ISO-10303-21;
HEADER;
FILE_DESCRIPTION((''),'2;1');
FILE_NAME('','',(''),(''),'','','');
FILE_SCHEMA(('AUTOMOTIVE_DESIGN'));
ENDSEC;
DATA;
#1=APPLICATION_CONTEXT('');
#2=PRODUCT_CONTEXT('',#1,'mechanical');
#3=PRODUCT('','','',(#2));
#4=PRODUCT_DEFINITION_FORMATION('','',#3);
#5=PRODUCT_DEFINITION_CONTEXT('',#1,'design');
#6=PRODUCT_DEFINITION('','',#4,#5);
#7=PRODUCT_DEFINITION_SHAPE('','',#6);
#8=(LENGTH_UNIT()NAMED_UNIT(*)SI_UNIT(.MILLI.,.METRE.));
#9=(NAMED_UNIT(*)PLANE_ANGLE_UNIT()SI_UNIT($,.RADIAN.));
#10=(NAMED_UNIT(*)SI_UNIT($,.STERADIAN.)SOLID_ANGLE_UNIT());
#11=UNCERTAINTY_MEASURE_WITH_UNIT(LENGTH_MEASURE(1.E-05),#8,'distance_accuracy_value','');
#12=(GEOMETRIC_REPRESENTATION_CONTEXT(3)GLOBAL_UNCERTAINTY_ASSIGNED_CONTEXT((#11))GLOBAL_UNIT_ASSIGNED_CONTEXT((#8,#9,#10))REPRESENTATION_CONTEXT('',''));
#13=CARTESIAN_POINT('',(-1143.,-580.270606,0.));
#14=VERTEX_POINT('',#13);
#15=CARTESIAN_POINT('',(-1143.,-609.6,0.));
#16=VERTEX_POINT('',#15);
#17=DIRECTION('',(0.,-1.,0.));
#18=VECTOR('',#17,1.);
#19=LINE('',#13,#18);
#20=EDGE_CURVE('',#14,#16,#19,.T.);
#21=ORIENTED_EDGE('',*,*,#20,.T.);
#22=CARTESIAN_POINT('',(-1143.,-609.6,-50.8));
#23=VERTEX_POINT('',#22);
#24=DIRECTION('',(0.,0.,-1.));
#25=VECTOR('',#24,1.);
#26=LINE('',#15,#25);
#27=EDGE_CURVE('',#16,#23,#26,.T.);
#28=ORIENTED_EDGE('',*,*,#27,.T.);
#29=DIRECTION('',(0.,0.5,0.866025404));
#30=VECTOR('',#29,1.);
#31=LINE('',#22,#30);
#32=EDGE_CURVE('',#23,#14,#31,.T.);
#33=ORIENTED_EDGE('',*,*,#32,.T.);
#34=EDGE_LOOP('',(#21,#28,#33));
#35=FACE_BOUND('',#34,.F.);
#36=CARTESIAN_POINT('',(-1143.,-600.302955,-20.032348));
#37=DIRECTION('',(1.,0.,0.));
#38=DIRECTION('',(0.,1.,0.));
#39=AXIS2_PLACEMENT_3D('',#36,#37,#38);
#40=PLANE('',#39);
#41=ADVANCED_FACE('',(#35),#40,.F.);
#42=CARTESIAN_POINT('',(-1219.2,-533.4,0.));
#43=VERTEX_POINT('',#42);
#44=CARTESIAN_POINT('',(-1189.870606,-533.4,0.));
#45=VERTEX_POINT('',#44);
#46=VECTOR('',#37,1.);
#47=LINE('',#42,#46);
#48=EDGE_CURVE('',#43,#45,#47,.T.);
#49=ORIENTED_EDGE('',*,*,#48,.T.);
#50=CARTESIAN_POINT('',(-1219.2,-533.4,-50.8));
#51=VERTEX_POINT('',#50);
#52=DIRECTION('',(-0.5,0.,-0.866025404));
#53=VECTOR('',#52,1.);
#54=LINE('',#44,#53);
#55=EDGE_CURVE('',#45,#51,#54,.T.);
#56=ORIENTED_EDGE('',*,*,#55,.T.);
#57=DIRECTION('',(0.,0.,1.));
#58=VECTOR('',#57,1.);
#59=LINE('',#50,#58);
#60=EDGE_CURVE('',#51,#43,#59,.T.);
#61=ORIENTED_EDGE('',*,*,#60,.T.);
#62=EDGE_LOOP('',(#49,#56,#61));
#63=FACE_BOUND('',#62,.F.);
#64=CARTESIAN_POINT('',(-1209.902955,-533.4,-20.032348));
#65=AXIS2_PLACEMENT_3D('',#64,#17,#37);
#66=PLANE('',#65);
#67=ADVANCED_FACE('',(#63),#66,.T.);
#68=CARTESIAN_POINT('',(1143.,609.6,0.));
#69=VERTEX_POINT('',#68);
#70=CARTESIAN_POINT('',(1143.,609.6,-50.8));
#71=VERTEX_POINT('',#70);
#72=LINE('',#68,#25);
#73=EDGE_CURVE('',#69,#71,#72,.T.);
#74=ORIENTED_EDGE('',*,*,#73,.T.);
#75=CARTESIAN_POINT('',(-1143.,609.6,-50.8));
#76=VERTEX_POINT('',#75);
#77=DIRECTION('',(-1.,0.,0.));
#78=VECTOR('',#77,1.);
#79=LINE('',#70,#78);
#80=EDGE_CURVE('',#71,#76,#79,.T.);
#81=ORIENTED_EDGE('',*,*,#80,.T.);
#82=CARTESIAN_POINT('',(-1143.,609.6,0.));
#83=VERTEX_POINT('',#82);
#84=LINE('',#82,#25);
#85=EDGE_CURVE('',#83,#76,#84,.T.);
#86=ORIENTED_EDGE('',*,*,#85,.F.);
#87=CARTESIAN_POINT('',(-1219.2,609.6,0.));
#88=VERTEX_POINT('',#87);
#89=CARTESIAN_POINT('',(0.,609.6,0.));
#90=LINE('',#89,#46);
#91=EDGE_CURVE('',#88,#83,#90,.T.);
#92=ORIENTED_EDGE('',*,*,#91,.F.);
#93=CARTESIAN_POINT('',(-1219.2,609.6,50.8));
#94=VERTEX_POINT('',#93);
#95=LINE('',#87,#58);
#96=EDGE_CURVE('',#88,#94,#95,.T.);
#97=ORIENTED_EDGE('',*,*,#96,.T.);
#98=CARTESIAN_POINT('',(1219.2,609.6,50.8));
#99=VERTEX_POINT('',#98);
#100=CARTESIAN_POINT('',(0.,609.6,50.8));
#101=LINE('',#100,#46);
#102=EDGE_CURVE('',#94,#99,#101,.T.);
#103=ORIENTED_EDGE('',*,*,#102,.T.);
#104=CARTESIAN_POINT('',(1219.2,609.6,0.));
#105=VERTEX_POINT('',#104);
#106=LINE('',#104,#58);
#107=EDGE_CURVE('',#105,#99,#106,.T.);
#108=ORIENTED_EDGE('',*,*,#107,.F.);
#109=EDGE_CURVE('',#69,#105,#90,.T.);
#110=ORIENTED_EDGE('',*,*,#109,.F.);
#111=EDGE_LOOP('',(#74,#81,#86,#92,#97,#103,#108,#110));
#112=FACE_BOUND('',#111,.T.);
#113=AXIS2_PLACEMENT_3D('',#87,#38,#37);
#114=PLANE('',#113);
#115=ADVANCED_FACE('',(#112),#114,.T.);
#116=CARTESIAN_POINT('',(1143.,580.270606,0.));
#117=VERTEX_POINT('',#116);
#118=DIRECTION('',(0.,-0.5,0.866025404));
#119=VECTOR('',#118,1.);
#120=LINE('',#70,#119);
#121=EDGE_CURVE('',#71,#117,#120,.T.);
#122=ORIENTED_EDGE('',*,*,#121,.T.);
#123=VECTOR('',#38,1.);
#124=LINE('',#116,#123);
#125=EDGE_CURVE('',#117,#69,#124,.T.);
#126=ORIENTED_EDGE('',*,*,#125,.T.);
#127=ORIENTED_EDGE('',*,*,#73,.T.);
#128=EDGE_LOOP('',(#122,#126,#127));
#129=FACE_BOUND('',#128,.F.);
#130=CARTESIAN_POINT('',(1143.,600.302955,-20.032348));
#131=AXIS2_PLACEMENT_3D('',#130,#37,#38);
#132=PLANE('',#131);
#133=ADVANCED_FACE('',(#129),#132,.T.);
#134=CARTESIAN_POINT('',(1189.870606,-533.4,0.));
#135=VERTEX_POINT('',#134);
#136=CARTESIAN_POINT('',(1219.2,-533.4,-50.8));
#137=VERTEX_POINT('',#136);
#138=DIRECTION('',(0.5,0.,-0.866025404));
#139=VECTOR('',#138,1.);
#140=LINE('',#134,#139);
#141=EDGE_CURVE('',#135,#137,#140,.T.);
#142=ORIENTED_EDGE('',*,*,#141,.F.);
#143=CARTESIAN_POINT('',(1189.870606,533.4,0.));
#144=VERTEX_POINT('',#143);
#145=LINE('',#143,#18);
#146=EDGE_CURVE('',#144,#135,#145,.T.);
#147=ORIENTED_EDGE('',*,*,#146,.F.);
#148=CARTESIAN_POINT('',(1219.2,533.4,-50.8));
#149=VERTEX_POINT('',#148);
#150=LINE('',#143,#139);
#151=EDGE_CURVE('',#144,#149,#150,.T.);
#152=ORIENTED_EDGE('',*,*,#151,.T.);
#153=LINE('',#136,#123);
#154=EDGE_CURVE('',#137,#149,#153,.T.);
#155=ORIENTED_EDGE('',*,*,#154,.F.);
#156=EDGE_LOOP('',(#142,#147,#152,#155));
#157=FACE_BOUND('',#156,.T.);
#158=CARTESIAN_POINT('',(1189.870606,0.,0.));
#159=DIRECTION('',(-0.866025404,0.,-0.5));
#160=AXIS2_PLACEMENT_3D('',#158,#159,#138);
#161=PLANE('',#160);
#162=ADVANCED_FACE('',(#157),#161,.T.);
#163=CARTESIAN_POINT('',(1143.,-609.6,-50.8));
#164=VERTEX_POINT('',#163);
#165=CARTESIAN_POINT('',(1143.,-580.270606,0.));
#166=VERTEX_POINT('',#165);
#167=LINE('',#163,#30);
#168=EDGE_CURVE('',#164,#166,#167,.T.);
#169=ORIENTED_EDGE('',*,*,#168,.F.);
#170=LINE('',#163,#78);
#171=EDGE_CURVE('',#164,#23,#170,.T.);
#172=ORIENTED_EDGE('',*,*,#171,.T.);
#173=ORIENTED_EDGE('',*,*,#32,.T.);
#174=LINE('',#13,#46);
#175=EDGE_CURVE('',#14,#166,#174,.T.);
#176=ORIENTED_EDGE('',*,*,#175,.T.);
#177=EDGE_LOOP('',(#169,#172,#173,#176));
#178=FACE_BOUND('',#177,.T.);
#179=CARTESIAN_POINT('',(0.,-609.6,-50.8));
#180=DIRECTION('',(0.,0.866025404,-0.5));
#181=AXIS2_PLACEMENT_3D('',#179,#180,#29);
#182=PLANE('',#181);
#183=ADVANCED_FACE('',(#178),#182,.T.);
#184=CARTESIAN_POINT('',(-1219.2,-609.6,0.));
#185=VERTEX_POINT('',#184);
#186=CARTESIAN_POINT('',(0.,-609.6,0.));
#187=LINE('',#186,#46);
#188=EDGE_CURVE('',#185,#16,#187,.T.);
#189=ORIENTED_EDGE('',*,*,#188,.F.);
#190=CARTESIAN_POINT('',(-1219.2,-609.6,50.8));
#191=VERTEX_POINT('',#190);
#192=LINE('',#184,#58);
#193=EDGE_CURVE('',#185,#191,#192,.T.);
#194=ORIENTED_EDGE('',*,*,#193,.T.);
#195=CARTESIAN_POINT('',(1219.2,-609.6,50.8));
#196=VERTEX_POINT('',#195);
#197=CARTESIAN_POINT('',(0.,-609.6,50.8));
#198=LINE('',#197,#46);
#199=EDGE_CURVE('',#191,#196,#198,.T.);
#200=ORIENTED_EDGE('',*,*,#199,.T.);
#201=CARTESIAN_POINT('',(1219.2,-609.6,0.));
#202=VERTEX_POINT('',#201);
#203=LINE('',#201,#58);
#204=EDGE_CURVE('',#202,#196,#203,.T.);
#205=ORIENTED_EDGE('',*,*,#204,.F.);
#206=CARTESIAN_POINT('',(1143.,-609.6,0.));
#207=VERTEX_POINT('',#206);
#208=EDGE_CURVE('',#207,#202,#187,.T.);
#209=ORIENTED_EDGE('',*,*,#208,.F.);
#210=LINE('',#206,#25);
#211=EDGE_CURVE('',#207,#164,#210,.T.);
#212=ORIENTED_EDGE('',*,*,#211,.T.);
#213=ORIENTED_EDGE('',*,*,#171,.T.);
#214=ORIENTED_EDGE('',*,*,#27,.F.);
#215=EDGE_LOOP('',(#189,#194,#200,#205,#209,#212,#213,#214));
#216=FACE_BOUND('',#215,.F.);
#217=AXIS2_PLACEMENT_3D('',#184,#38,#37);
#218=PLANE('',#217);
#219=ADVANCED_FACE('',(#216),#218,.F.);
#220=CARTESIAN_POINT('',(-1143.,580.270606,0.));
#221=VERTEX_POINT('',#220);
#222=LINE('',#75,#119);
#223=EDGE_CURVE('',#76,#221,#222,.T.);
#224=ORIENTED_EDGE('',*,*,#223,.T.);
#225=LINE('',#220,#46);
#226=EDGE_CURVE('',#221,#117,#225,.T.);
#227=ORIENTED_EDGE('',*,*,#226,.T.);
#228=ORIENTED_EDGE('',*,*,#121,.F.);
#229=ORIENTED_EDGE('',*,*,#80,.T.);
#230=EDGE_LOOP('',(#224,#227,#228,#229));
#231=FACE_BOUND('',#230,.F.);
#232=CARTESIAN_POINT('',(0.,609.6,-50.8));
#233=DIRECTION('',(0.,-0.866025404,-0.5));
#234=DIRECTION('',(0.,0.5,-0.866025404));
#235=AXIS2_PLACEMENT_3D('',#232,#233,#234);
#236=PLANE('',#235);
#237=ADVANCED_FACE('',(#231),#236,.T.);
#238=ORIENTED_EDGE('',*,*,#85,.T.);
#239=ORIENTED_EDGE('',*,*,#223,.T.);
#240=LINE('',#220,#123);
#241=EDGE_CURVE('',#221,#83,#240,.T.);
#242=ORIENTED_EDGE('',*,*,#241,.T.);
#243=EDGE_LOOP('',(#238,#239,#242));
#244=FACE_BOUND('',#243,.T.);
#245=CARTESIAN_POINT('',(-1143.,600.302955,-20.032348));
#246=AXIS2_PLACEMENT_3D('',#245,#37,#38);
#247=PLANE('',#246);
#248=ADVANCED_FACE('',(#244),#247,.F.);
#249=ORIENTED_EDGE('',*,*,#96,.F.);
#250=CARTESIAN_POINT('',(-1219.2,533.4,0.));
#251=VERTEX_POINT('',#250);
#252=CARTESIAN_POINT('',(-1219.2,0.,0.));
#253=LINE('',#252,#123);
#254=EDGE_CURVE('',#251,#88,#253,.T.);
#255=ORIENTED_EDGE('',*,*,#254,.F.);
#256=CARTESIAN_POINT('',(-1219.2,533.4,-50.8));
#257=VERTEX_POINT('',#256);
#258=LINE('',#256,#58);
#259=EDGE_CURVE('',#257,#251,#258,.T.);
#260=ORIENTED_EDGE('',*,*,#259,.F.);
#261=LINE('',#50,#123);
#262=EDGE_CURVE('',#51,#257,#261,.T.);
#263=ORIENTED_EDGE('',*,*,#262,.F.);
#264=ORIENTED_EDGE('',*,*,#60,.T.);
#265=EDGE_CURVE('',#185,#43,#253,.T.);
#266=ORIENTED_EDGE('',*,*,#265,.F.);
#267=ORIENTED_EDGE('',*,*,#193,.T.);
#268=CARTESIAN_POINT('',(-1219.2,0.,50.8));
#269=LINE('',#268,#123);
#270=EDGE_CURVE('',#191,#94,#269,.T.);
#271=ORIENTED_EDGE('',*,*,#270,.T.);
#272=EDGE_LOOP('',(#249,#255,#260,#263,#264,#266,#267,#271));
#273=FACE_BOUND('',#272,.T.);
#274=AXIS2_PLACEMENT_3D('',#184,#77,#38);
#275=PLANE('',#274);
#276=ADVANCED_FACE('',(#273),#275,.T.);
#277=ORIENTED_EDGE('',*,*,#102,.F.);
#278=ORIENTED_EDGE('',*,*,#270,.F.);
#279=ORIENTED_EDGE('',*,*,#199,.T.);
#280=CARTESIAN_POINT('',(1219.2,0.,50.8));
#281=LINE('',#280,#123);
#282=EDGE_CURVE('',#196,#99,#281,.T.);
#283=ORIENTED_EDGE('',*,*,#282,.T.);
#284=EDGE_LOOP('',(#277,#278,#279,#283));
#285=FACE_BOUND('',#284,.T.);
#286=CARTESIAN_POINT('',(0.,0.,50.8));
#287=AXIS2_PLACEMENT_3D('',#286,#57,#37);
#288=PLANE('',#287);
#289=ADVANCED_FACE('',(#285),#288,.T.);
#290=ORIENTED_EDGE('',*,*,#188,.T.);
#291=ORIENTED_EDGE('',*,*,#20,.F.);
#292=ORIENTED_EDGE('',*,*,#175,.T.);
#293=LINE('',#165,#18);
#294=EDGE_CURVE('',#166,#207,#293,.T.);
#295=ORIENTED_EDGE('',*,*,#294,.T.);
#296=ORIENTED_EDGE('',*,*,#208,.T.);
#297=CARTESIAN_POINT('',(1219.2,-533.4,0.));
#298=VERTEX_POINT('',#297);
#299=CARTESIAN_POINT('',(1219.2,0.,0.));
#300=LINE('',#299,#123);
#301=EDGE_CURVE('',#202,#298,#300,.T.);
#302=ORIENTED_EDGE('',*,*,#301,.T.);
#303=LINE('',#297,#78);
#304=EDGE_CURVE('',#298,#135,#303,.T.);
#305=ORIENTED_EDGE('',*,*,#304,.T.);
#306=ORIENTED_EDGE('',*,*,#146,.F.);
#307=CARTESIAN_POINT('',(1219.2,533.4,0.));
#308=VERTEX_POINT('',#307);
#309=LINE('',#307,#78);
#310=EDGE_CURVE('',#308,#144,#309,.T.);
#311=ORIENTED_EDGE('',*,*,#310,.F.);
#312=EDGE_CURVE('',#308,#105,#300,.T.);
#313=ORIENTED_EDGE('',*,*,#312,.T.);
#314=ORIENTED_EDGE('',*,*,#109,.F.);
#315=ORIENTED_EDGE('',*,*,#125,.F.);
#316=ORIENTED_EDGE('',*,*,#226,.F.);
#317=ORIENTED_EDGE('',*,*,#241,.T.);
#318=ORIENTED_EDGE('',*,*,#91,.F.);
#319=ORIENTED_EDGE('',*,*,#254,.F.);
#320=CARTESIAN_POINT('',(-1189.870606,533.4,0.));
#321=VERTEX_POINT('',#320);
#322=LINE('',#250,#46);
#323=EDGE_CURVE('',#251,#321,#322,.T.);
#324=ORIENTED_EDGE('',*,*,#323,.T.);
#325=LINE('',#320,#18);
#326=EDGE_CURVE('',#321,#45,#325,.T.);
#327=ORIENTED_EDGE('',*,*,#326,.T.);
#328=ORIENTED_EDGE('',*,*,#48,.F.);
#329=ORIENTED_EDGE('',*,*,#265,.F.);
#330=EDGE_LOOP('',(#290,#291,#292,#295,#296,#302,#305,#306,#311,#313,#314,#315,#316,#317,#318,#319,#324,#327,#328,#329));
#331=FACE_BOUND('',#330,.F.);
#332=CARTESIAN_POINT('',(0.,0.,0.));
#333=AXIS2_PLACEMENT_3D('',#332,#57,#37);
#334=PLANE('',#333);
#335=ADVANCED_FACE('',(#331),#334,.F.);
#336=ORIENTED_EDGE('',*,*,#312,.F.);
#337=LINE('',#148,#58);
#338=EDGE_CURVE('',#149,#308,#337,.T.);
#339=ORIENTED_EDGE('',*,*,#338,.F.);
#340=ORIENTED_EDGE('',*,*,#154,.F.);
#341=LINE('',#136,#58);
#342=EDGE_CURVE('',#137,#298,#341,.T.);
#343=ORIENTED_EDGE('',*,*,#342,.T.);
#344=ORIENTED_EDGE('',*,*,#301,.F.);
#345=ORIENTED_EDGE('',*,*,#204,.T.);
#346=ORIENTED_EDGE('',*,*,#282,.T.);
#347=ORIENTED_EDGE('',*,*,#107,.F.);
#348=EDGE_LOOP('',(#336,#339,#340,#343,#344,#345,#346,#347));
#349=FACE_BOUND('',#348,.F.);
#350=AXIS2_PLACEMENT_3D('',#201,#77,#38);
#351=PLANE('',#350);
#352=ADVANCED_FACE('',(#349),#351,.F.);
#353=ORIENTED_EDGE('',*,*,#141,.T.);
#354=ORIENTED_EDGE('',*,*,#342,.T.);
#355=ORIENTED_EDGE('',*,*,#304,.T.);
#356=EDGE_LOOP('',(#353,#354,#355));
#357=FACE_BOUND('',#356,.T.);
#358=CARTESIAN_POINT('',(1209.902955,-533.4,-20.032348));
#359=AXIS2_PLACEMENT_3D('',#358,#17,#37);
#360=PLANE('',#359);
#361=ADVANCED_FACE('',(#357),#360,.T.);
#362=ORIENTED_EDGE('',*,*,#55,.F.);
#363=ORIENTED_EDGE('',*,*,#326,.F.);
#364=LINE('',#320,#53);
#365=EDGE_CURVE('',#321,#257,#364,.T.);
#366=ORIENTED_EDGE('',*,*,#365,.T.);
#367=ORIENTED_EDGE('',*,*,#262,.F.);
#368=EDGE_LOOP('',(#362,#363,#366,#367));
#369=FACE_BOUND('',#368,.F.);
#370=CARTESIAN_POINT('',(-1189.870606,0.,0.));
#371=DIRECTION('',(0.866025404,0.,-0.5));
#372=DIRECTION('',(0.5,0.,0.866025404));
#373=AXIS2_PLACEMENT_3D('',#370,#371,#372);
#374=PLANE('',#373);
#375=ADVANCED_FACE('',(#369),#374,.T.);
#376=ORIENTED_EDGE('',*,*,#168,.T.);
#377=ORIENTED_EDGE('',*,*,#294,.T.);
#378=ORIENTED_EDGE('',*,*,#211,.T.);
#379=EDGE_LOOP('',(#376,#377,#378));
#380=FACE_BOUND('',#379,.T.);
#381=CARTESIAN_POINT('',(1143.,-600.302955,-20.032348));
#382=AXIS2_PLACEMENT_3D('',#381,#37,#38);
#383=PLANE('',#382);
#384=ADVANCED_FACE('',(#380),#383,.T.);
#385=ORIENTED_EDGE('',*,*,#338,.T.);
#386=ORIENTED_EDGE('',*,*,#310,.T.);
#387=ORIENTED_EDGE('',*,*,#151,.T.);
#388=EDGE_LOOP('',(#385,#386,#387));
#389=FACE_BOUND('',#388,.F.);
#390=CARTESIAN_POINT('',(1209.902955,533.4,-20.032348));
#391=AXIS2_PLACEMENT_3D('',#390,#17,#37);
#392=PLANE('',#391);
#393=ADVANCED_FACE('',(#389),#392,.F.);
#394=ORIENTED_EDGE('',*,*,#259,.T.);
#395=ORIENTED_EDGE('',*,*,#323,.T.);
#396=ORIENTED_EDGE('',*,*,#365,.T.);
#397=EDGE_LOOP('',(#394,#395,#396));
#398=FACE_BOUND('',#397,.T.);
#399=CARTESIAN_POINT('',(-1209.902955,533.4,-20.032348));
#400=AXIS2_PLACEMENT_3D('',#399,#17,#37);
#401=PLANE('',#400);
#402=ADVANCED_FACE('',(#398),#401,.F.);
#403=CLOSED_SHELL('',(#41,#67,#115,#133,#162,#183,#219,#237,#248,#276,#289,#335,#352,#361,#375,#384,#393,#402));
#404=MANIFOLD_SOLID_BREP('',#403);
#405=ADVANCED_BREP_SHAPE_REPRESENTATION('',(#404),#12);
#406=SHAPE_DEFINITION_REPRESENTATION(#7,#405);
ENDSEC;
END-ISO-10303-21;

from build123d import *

# Parameters (mm, degrees)
F0_W     = 2438.4
F0_H     = 1219.2
F1_DEPTH = 50.8
F3_DEPTH = 1143
F6_DEPTH = 533.4


# Not quite as in the source:
# - a pattern or mirror of a feature is missing from the dataset's text; its kind, count and spacing are read off the source's solid


with BuildPart() as f1:
    # F0 (on Top) → F1 (new body)
    with BuildSketch(Plane.XY):
        Rectangle(F0_W, F0_H)
    extrude(amount=F1_DEPTH)

    # F2 (on Right) → F3 (join, symmetric)
    with BuildSketch(Plane.YZ):
        Polygon((-609.6, -50.8), (-580.2706063252, 0), (-609.6, 0), align=None)
    f3 = extrude(amount=F3_DEPTH, both=True)

    # F3_copies: F3 across plane
    add(f3.mirror(Plane.ZX))

    # F5 (on Front) → F6 (join, symmetric)
    with BuildSketch(Plane.XZ):
        Polygon((1219.2, 0), (1189.8706063252, 0), (1219.2, -50.8), align=None)
    f6 = extrude(amount=F6_DEPTH, both=True)

    # F6_copies: F6 across plane
    add(f6.mirror(Plane(origin=(0, 0, 0), x_dir=(0, 0, -1), z_dir=(-1, 0, 0))))


solid = f1.part
